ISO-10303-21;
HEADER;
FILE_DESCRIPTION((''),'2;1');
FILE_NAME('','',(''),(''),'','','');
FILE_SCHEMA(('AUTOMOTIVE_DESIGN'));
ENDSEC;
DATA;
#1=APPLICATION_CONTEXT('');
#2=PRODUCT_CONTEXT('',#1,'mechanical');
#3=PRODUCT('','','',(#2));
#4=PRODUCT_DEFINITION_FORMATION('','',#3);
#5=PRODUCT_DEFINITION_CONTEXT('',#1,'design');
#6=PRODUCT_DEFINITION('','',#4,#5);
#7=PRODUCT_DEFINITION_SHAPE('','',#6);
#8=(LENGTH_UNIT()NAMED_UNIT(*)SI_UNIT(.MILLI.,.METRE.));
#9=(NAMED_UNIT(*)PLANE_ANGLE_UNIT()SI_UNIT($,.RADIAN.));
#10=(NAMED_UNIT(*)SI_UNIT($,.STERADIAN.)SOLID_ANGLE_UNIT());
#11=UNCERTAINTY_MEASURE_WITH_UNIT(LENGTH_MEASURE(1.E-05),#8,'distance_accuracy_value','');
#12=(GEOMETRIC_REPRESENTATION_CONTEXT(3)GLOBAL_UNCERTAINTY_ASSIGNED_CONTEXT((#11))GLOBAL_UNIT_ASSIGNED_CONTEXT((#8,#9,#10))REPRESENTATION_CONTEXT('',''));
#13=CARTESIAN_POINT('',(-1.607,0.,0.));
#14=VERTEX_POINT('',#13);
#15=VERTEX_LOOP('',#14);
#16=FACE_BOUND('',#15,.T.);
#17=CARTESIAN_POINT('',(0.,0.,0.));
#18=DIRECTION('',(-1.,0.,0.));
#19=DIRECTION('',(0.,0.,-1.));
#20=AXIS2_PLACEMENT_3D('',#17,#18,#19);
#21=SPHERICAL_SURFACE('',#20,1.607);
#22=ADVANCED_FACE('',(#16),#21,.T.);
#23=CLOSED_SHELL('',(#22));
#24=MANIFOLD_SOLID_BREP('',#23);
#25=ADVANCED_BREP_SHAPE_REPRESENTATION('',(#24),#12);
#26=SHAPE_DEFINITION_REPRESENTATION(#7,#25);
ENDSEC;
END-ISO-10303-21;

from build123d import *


with BuildPart() as part:
    # Sketch1 → Revolve1 (revolve)
    with BuildSketch(Plane(origin=(0, 0, 0), x_dir=(1, 0, 0), z_dir=(0, 1, 0))):
        with BuildLine():
            ThreePointArc((1.607, 0), (0, 1.607), (-1.607, 0))
            Line((-1.607, 0), (1.607, 0))
        make_face()
    revolve(axis=Axis((-1.607, 0, 0), (1, 0, 0)))


solid = part.part
